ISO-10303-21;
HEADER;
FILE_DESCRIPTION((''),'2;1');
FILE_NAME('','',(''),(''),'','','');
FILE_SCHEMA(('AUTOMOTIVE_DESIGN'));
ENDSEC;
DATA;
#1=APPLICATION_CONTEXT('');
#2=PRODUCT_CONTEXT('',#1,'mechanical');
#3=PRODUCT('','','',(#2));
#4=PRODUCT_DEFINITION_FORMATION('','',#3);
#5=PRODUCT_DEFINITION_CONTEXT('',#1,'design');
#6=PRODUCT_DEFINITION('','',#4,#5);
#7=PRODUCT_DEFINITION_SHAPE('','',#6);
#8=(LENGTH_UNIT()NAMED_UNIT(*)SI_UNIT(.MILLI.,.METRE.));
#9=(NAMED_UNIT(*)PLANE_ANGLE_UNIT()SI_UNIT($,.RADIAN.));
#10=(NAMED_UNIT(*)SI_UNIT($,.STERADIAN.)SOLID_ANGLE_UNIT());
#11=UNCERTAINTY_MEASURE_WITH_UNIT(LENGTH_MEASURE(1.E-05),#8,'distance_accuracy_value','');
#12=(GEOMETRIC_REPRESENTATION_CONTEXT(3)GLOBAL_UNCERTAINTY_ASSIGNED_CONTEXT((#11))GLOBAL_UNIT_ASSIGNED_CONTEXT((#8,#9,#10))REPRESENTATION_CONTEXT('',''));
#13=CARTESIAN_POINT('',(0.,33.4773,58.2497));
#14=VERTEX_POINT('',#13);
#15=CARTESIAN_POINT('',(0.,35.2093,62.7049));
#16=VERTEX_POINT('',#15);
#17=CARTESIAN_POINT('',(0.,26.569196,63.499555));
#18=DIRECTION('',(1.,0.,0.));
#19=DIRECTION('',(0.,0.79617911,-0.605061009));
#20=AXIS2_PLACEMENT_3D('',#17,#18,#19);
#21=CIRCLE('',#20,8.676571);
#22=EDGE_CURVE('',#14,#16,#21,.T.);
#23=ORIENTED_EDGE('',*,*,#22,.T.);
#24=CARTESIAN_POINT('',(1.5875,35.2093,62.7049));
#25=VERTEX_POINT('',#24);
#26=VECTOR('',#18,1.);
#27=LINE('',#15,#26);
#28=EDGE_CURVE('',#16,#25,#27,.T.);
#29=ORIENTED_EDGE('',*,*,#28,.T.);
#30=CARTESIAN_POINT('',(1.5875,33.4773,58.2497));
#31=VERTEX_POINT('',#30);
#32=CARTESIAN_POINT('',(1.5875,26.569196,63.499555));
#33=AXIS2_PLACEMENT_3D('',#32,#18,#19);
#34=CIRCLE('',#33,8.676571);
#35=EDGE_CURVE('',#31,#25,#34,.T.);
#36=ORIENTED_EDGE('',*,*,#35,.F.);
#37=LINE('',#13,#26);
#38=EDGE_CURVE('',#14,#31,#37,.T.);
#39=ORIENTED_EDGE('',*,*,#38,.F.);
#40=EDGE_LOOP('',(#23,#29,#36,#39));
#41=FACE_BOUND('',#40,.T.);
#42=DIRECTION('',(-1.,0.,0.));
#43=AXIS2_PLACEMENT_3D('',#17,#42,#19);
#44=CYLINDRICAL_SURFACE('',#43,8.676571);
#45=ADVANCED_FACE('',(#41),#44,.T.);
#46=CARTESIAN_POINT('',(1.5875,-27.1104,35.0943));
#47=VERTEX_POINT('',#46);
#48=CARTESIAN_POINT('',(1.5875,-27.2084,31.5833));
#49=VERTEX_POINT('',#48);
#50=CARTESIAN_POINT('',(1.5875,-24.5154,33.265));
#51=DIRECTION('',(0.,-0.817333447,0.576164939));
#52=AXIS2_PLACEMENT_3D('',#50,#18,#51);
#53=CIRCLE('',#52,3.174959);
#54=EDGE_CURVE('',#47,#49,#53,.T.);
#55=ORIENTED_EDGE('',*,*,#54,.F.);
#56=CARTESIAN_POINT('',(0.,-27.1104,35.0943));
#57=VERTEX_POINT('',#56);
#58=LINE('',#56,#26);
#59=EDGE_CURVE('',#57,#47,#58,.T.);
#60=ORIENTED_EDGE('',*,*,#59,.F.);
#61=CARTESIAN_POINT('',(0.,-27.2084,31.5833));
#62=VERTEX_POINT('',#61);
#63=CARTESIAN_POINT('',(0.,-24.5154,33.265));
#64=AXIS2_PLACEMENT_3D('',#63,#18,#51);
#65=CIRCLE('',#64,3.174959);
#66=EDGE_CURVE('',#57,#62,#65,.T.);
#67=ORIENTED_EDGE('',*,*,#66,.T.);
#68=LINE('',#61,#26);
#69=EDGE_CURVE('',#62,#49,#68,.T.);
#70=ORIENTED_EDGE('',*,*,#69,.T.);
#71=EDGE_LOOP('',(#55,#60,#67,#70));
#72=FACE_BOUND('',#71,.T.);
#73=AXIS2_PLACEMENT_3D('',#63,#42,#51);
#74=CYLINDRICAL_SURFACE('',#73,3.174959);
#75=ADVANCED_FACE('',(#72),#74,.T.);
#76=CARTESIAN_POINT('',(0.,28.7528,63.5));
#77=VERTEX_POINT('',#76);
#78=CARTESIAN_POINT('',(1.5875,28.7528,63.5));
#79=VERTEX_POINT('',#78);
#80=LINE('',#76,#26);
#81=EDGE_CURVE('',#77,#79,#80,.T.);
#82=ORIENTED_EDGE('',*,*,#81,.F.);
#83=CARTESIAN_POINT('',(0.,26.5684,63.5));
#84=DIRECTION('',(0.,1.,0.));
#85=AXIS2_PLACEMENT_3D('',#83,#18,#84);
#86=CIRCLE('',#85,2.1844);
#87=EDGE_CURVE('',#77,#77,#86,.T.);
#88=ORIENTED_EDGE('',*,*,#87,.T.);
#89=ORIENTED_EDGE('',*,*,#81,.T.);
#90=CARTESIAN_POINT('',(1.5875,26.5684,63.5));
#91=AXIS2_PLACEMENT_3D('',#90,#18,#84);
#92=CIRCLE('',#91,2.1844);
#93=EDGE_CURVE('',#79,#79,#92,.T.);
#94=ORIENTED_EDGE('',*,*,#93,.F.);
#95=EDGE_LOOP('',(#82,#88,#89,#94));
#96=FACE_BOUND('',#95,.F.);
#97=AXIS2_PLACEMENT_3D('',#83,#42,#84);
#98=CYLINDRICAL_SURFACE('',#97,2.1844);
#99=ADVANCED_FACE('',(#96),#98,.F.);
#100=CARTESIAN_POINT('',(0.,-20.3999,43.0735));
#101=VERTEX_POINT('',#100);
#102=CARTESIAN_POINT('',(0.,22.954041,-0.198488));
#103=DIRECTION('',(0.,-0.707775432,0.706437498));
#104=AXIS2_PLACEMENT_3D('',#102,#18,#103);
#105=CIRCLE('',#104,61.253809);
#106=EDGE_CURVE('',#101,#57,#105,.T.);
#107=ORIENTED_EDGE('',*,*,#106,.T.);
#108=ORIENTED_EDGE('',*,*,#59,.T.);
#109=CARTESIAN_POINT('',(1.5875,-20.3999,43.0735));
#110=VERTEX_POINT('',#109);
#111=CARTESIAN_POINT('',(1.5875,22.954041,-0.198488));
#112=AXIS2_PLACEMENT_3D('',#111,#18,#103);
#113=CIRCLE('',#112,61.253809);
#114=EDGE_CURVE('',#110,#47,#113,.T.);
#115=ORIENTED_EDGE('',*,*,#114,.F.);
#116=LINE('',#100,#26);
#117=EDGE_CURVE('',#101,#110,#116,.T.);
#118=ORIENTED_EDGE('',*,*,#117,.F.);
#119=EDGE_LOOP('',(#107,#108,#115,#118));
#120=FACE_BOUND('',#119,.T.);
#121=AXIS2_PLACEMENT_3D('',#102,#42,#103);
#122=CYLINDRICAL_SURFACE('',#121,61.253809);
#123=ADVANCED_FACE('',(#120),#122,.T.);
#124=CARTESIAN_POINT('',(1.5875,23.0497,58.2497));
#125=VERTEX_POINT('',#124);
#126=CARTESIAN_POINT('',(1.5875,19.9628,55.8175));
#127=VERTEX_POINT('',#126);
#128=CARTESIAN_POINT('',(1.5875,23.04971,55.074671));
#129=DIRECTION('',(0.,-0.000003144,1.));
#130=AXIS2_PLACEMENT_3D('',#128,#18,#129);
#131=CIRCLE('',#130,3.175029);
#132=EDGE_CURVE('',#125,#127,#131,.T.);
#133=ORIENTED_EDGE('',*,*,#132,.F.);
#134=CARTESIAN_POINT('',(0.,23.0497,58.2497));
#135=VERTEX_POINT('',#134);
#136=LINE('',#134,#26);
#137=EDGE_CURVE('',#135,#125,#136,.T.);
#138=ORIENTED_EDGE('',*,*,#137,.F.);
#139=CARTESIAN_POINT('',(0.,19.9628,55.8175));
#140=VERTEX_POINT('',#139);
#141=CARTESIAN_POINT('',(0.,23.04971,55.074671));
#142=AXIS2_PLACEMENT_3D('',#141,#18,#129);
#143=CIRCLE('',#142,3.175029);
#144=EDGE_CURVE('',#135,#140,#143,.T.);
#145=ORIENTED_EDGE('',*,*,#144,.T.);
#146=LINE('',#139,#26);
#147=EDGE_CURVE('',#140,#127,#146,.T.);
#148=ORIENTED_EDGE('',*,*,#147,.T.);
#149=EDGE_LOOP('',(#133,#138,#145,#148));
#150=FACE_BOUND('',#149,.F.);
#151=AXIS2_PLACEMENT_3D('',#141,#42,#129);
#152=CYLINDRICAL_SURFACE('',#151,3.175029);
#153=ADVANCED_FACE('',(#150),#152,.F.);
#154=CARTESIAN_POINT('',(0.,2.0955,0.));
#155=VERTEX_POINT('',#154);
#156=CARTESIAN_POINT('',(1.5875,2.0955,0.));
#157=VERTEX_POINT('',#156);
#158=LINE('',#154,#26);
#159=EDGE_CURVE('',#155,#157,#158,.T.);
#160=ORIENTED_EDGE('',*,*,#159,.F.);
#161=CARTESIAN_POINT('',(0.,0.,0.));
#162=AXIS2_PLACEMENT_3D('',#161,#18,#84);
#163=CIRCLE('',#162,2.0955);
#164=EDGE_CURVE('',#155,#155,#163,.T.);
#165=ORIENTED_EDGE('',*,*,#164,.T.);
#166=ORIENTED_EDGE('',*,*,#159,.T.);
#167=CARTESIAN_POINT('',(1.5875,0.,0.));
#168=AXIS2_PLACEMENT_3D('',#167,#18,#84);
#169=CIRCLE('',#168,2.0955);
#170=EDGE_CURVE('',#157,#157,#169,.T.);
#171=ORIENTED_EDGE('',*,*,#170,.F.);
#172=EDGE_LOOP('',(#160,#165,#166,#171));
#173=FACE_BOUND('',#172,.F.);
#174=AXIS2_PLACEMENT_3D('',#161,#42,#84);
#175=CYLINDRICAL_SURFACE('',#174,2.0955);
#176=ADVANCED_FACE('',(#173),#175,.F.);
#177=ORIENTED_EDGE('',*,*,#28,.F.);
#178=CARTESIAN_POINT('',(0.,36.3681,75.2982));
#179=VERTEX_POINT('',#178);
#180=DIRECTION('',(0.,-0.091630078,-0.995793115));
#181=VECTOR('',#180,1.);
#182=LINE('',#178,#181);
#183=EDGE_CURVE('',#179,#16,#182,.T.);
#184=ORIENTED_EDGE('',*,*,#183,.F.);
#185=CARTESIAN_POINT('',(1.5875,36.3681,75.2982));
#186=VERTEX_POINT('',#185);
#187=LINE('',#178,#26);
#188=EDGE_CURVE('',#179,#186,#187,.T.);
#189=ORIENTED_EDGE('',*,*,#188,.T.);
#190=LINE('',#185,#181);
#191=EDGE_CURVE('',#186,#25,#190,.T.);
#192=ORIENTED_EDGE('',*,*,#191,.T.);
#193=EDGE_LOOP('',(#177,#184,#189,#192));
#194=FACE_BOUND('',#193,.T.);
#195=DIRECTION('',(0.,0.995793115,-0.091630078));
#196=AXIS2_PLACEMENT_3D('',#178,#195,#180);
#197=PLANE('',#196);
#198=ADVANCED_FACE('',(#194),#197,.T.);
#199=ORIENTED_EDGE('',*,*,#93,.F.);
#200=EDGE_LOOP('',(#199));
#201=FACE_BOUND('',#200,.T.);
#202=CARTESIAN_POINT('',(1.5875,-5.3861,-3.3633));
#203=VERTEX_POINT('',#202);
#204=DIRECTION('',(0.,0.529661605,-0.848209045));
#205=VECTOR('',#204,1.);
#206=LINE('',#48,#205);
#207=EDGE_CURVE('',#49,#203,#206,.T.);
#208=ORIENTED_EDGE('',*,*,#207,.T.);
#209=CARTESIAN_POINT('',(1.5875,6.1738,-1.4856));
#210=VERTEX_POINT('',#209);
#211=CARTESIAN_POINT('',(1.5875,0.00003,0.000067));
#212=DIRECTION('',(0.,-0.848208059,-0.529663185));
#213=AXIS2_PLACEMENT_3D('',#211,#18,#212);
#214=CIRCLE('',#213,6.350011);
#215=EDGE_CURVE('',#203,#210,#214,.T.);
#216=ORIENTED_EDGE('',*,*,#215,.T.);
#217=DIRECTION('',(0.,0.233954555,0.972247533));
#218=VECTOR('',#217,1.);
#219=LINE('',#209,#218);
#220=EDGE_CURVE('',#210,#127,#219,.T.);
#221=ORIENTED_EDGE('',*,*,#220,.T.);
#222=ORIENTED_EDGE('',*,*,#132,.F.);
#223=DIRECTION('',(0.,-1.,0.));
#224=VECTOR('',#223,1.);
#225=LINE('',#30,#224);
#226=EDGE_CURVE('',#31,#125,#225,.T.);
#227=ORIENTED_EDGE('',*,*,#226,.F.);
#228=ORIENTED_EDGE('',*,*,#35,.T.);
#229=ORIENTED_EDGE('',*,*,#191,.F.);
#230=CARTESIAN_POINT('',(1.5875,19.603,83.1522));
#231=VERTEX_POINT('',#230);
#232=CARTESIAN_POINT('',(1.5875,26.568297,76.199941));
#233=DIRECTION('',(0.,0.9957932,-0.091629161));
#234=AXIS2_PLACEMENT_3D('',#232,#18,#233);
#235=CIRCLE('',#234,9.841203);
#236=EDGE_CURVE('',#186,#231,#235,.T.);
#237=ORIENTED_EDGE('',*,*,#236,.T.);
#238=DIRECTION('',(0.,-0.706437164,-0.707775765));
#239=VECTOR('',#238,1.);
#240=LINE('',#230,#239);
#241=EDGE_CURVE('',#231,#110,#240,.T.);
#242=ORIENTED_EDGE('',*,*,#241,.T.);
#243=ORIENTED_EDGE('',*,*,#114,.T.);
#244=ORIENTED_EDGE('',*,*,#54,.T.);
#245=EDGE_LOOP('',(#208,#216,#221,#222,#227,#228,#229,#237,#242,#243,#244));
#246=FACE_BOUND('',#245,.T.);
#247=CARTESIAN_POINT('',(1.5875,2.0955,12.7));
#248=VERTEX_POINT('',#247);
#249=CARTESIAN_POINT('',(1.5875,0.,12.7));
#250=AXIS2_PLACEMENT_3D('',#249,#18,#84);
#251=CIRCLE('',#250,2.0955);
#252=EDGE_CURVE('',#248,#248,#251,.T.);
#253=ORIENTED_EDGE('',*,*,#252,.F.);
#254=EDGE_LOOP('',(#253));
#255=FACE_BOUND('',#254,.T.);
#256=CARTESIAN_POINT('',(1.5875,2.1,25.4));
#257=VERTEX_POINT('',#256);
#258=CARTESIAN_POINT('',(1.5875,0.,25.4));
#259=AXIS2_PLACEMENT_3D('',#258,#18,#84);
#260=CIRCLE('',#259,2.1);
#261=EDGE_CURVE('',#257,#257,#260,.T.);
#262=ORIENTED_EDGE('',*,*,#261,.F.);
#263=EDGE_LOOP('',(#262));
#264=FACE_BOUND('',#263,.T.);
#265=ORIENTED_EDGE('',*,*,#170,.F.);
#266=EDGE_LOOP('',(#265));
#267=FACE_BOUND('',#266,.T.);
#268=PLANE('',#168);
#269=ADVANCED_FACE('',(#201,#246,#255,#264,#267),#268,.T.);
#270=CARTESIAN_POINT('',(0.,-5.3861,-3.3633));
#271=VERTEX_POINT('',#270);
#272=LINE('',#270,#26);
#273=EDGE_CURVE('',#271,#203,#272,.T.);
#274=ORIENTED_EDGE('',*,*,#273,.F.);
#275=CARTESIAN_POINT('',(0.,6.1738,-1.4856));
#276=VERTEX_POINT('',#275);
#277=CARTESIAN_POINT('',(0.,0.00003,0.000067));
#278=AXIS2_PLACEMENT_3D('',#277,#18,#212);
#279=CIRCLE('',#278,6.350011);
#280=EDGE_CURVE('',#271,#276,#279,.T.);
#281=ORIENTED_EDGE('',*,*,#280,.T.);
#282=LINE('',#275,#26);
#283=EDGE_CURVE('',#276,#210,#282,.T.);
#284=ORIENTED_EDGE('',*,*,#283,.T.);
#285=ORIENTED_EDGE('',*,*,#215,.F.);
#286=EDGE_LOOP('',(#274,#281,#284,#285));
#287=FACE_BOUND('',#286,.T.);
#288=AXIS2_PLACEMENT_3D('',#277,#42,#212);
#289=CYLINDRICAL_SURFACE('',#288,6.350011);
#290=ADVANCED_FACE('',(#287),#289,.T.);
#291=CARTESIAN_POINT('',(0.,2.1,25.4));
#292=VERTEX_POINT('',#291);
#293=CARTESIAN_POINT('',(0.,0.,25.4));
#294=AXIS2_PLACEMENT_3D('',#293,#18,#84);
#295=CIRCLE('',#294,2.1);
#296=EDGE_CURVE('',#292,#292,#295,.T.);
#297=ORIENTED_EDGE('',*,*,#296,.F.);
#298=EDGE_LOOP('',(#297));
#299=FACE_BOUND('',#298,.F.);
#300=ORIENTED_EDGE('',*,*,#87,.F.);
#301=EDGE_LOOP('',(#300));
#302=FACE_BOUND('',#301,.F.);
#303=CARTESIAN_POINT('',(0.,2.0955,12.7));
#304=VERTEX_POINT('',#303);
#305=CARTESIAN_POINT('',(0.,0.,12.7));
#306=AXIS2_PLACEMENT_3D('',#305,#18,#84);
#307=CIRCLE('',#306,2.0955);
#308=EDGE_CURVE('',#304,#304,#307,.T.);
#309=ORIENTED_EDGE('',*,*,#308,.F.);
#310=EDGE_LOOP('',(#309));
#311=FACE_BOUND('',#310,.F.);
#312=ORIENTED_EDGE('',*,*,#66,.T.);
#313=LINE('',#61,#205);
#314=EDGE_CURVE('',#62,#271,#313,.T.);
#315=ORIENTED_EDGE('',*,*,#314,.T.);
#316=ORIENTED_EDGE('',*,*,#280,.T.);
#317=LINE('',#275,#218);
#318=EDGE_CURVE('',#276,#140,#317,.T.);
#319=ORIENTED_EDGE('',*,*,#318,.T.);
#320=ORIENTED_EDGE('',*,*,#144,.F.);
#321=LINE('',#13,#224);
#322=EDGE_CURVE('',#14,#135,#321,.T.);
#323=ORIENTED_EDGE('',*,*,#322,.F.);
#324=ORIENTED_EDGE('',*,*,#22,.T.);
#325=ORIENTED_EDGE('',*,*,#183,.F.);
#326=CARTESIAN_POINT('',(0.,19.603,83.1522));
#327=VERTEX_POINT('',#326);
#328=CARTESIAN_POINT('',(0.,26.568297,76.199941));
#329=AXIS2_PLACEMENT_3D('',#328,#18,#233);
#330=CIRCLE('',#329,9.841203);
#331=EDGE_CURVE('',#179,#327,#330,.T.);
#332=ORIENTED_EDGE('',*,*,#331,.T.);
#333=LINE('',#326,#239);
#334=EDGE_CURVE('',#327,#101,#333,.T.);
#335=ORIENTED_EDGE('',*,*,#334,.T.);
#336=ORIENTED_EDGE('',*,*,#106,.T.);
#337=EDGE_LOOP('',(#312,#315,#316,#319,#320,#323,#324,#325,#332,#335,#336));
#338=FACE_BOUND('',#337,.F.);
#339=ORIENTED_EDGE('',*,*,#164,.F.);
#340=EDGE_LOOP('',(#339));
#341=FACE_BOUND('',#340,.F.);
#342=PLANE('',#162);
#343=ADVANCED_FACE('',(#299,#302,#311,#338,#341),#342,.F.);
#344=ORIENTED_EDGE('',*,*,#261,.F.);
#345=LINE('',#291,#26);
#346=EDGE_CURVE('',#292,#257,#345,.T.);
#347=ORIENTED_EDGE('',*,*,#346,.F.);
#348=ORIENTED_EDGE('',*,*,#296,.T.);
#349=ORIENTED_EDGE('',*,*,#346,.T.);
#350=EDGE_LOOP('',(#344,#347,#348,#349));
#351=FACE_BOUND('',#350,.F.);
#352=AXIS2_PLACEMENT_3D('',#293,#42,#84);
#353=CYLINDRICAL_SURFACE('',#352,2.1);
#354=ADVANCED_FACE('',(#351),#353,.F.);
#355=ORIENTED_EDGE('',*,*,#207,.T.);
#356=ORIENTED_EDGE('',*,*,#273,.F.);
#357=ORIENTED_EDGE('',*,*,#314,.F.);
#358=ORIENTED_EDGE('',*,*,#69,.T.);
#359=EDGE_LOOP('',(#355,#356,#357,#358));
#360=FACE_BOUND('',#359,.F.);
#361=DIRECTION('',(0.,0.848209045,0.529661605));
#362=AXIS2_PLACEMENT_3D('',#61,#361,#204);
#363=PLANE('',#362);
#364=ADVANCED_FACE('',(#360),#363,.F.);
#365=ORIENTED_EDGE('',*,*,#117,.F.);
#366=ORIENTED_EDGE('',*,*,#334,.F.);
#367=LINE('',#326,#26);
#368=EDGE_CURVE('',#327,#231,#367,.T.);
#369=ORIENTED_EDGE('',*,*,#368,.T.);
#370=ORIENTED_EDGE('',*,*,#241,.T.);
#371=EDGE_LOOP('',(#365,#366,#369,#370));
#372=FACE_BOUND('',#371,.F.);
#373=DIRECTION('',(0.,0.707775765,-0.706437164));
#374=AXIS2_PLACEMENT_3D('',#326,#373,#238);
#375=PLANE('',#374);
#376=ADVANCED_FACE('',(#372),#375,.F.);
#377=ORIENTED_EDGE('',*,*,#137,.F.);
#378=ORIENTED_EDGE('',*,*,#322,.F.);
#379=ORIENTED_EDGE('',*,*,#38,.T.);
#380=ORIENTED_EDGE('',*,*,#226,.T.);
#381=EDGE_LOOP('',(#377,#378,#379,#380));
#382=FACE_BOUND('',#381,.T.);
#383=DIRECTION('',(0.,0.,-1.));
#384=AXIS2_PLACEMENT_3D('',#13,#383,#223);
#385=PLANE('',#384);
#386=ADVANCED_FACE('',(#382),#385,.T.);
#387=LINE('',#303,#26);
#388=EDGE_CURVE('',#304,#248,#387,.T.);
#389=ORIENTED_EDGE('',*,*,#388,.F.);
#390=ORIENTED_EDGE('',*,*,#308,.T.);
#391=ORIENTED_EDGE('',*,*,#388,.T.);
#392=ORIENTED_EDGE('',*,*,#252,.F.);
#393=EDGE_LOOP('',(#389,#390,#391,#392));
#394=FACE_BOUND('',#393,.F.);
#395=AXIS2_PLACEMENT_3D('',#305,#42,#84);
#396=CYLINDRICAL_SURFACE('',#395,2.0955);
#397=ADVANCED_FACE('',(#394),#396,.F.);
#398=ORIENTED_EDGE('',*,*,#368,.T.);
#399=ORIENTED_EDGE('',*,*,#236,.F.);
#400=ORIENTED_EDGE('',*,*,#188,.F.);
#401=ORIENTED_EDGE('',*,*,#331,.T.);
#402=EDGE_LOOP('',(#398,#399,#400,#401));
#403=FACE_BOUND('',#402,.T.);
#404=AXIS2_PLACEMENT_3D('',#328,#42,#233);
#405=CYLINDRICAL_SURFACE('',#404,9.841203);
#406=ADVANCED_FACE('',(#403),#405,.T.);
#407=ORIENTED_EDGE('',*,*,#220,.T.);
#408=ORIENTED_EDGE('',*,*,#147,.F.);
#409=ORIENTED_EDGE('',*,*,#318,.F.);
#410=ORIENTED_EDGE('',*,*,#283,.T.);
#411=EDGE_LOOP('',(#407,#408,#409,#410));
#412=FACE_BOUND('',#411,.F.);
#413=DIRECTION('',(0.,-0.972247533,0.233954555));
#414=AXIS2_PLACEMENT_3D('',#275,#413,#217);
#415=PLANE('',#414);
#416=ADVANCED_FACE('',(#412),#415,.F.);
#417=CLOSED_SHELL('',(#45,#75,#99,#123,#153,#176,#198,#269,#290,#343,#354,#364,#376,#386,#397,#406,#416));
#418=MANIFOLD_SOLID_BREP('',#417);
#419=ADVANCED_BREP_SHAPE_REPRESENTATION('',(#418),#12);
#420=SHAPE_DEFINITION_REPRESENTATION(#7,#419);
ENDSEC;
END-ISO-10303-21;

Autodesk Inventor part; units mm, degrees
ref_plane "YZ Plane" through (0, 0, 0) normal (1, 0, 0) x (0, 1, 0)
ref_plane "XZ Plane" through (0, 0, 0) normal (0, 1, 0) x (-1, 0, 0)
ref_plane "XY Plane" through (0, 0, 0) normal (0, 0, 1) x (1, 0, 0)
sketch "main" plane through (0, 0, 0) normal (0, 0, 1) x (1, 0, 0)
  circle A0 centre (10.9635, 21.0817) radius 2.1
  circle A1 centre (10.9635, 21.0817) radius 2.0955
  arc A2 (31.3634, 3.4082) -> (38.0738, 11.3874) centre (-11.9899, 46.6796) ccw
  arc A3 (38.0738, 11.3874) -> (38.1719, 14.8984) centre (35.4788, 13.2167) ccw
  circle A4 centre (10.9635, 46.4817) radius 2.0955
  arc A5 (16.3496, 49.845) -> (4.7897, 47.9673) centre (10.9635, 46.4817) ccw
  line L0 (38.1719, 14.8984) -> (16.3496, 49.845)
  arc A6 (-25.4047, -28.8165) -> (-8.6396, -36.6705) centre (-15.6049, -29.7183) ccw
  line L1 (-8.6396, -36.6705) -> (31.3634, 3.4082)
  line L2 (-25.4047, -28.8165) -> (-24.2459, -16.2232)
  circle A7 centre (10.9635, 33.7817) radius 2.0955
  circle A8 centre (-15.6049, -17.0183) radius 2.1844
  arc A9 (-22.5138, -11.768) -> (-24.2459, -16.2232) centre (-15.6049, -17.0183) ccw
  line L3 (4.7897, 47.9673) -> (-8.9994, -9.3358)
  line L4 (-22.5138, -11.768) -> (-12.0863, -11.768)
  arc A10 (-12.0863, -11.768) -> (-8.9994, -9.3358) centre (-12.0863, -8.593) ccw
  point P0 (5.2874, 13.8034)
  point P1 (39.2673, 13.1442)
  dimension "d0" = 4.191
  dimension "d1" = 4.191
  dimension "d3" = 3.175
  dimension "d4" = 4.191
  dimension "d11" = 3.175
sketch "Sketch1" plane through (0, 0, 0) normal (1, 0, 0) x (0, 1, 0)
  circle A0 centre (0, 25.4) radius 2.1
  circle A1 centre (0, 25.4) radius 2.0955
  arc A2 (-20.3999, 43.0735) -> (-27.1104, 35.0943) centre (22.9534, -0.1979) ccw
  arc A3 (-27.1104, 35.0943) -> (-27.2084, 31.5833) centre (-24.5154, 33.265) ccw
  circle A4 centre (0, 0) radius 2.0955
  arc A5 (-5.3861, -3.3633) -> (6.1738, -1.4856) centre (0, 0) ccw
  line L0 (-27.2084, 31.5833) -> (-5.3861, -3.3633)
  arc A6 (36.3681, 75.2982) -> (19.603, 83.1522) centre (26.5684, 76.2) ccw
  line L1 (19.603, 83.1522) -> (-20.3999, 43.0735)
  line L2 (36.3681, 75.2982) -> (35.2093, 62.7049)
  circle A7 centre (0, 12.7) radius 2.0955
  circle A8 centre (26.5684, 63.5) radius 2.1844
  arc A9 (33.4773, 58.2497) -> (35.2093, 62.7049) centre (26.5684, 63.5) ccw
  line L3 (6.1738, -1.4856) -> (19.9628, 55.8175)
  line L4 (33.4773, 58.2497) -> (23.0497, 58.2497)
  arc A10 (23.0497, 58.2497) -> (19.9628, 55.8175) centre (23.0497, 55.0747) ccw
  point P0 (0, 0)
extrude "Extrusion1" add sketch "Sketch1" along normal blind 1.5875 contours L1 A6 L2 A9 L4 A10 L3 A5 L0 A3 A2
properties part number "sled" material "Acetal Resin, White"
